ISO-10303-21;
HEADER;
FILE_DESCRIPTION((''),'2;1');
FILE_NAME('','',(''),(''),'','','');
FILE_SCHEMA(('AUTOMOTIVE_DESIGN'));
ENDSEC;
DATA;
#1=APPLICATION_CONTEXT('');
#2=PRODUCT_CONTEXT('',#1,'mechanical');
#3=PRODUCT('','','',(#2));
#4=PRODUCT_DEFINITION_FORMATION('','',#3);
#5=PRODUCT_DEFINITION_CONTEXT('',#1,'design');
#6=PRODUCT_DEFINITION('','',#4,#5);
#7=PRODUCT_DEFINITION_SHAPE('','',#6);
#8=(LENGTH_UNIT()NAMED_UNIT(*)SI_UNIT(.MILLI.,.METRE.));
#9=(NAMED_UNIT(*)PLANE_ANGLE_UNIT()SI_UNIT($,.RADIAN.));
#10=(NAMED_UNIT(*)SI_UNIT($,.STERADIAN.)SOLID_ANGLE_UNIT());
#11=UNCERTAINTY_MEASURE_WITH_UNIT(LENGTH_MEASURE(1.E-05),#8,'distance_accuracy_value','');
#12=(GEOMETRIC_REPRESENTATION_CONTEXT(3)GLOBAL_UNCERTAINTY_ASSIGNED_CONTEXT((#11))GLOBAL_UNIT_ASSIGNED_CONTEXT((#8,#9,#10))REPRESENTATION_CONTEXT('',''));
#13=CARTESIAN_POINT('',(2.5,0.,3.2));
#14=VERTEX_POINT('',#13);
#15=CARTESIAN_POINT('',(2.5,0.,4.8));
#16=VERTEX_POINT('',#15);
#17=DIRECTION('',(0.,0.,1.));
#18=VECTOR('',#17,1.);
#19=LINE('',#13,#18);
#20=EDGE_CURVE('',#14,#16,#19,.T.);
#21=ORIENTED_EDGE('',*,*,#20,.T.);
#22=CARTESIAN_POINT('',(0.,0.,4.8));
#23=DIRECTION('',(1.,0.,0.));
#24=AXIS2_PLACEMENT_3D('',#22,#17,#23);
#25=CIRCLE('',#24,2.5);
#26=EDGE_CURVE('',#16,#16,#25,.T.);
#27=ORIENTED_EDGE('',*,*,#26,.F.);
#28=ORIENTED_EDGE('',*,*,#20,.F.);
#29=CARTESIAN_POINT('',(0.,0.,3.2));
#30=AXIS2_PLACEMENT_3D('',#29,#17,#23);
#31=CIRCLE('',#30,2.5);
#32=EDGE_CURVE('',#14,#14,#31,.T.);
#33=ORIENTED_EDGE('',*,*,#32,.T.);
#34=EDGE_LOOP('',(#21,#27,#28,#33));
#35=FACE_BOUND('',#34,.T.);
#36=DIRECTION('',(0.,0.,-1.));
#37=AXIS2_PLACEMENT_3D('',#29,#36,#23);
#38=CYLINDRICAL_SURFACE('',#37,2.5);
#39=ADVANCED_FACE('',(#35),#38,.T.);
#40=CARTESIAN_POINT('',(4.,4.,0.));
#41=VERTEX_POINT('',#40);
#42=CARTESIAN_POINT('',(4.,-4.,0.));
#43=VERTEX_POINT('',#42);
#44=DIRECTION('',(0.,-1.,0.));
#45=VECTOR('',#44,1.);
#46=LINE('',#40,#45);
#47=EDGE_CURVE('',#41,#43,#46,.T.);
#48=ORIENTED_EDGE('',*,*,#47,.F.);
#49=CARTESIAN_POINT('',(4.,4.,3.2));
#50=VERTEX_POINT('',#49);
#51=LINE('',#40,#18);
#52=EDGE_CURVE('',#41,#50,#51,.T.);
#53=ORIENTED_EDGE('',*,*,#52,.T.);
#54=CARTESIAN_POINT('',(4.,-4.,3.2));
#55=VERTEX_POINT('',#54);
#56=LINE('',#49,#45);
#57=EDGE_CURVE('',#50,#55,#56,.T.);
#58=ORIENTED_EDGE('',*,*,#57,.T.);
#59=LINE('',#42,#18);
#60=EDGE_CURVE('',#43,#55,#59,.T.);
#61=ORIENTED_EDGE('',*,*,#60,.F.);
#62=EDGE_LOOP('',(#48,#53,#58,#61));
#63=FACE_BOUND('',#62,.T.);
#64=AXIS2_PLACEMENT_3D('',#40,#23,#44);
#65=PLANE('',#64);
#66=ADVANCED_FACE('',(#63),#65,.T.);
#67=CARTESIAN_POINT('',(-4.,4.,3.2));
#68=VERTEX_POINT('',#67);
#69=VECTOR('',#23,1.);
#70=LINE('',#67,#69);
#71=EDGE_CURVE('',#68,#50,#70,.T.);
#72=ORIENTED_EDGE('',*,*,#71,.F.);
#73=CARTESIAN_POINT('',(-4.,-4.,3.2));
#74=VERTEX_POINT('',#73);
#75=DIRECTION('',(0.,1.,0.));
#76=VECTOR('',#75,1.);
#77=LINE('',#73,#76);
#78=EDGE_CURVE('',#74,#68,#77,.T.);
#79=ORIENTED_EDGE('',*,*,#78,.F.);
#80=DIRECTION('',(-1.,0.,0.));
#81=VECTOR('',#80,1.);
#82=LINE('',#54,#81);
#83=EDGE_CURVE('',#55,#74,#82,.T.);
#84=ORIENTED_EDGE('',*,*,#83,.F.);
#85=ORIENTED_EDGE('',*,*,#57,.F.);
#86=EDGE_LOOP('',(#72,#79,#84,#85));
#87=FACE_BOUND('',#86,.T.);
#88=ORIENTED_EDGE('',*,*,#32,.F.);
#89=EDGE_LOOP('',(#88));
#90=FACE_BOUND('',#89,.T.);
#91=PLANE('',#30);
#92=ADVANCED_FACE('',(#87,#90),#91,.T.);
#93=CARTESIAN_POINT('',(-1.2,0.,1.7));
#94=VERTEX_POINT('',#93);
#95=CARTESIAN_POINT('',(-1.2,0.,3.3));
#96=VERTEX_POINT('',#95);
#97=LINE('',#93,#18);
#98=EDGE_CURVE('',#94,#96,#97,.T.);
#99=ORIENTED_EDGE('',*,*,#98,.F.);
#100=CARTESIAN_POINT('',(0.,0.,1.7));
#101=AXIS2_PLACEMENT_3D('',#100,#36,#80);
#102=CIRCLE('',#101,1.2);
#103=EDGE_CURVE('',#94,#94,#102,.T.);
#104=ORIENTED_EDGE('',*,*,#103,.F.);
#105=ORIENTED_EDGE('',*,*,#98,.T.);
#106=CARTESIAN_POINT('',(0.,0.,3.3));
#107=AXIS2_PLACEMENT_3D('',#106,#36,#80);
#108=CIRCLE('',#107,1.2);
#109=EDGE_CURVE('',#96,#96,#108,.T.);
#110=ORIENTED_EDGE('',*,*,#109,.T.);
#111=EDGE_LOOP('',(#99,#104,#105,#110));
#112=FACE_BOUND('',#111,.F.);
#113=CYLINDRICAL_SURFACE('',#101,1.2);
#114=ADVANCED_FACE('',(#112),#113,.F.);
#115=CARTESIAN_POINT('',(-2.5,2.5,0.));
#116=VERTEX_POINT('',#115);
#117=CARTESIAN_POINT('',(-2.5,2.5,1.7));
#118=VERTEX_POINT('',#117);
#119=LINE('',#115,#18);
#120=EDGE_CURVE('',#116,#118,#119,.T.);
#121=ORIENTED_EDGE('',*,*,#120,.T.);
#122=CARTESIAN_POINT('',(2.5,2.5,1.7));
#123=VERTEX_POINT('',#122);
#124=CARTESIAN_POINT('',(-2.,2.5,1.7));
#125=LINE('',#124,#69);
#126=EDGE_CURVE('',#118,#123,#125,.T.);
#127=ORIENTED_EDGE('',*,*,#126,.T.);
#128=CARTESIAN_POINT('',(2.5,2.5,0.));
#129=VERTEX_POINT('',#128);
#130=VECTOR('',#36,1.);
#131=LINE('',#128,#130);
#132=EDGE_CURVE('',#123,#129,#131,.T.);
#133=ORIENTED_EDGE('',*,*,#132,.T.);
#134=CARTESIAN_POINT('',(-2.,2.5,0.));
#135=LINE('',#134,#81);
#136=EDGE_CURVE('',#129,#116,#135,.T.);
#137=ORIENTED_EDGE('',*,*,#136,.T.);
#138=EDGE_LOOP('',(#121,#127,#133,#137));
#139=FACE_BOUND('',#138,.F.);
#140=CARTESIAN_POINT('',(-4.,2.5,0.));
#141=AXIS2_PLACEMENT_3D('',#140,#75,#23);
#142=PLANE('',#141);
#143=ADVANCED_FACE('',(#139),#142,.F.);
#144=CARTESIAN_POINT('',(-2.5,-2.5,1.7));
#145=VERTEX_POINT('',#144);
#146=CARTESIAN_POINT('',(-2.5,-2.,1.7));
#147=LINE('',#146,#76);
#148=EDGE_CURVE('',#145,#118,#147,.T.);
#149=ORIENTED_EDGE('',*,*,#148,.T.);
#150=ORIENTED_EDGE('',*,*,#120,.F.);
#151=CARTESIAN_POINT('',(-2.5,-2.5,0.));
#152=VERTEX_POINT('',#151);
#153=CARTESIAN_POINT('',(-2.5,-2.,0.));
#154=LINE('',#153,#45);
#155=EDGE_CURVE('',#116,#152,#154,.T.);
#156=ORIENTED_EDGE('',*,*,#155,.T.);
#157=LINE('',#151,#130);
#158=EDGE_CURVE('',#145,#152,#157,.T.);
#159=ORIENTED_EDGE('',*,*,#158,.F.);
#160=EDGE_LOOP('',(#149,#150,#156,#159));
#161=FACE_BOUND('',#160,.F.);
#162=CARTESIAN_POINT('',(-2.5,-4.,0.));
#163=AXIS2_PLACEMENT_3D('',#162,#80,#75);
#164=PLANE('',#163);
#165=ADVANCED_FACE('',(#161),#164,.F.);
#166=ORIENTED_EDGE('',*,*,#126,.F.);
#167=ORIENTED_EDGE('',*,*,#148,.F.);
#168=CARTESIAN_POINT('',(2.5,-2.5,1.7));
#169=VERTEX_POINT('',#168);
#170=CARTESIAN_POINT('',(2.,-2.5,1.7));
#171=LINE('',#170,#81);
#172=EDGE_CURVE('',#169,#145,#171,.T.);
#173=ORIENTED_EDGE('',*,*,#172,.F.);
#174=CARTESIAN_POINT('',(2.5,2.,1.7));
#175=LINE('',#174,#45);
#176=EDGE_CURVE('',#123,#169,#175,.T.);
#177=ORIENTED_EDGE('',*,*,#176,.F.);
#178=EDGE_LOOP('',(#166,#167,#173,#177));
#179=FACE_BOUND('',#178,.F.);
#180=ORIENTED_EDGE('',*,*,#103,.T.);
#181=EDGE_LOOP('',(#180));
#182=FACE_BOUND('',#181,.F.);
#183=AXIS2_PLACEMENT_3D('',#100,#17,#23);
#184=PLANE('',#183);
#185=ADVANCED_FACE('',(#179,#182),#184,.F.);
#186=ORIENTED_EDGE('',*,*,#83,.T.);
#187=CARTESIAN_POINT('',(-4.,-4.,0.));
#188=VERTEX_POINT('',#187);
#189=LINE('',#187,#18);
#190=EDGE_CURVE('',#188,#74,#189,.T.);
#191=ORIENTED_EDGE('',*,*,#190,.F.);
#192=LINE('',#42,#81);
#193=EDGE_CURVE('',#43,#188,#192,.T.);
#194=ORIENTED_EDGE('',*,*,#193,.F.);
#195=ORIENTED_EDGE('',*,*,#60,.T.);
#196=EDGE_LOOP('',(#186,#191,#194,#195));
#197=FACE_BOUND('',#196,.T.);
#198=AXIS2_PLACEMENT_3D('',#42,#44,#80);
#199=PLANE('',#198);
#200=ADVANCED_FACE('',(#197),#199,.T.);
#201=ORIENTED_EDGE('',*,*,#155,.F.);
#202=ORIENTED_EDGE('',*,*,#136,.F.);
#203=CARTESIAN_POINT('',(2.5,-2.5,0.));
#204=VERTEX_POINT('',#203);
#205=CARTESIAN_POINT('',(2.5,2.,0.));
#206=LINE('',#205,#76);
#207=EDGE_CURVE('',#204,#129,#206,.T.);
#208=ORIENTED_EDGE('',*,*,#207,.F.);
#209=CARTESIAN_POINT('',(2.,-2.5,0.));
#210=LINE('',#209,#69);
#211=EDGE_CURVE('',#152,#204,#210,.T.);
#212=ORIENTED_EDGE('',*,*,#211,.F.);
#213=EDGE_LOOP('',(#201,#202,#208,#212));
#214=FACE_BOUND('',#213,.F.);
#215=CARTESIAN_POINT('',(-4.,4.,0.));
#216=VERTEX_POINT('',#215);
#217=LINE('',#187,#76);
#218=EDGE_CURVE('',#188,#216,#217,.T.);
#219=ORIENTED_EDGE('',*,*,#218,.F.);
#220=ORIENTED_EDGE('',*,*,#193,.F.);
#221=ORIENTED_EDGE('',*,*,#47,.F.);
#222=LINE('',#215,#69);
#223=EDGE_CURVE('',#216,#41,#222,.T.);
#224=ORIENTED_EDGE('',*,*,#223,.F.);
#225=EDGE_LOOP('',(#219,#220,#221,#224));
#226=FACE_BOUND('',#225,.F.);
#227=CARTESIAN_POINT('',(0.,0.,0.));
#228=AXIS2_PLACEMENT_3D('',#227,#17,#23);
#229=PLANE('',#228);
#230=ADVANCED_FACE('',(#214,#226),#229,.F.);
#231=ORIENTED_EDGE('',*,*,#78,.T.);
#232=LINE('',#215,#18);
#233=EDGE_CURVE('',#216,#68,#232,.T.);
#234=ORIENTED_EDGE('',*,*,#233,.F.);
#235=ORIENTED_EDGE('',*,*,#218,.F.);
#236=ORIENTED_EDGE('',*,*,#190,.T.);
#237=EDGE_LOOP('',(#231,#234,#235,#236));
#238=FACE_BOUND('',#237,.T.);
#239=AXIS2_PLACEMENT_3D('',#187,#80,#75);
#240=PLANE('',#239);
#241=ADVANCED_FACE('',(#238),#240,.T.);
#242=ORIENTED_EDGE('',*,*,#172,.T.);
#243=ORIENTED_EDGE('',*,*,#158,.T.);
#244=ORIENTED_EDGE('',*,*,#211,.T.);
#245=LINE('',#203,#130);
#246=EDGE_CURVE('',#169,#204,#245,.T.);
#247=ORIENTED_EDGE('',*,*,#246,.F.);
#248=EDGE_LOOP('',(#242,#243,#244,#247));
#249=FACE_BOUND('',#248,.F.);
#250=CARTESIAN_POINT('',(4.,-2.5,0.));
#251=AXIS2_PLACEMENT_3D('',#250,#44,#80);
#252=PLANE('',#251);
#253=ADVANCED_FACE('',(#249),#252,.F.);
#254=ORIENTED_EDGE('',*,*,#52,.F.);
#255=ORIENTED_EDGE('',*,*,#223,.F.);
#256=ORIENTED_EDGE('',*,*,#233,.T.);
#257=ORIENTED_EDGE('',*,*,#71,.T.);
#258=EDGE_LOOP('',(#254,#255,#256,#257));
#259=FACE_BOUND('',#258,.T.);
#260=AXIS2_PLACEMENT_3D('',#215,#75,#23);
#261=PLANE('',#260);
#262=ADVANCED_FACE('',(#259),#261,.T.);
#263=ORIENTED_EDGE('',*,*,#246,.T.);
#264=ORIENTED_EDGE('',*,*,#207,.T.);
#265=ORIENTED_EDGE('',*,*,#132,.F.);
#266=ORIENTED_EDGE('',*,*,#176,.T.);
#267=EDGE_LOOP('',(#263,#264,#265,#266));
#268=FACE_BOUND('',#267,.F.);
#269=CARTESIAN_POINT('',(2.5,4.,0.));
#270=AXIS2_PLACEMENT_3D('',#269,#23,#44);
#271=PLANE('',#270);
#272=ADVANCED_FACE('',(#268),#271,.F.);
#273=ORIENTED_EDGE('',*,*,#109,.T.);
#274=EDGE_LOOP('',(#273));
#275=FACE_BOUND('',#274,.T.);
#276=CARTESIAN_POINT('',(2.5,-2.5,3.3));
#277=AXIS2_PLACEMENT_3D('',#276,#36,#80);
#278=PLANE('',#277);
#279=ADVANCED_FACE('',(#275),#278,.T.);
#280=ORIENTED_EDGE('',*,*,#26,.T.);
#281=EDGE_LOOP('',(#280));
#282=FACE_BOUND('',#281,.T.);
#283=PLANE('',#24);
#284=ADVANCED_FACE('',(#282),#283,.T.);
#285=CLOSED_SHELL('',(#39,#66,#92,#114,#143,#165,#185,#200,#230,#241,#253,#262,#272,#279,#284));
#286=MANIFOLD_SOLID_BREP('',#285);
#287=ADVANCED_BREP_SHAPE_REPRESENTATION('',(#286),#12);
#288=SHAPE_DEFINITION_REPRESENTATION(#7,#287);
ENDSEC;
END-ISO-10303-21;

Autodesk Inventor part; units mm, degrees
ref_plane "YZ Plane" through (0, 0, 0) normal (1, 0, 0) x (0, 1, 0)
ref_plane "XZ Plane" through (0, 0, 0) normal (0, 1, 0) x (-1, 0, 0)
ref_plane "XY Plane" through (0, 0, 0) normal (0, 0, 1) x (1, 0, 0)
sketch "Sketch1" plane through (0, 0, 0) normal (0, 0, 1) x (1, 0, 0)
  line L0 (-4, 4) -> (4, 4)
  line L1 (4, 4) -> (4, -4)
  line L2 (4, -4) -> (-4, -4)
  line L3 (-4, -4) -> (-4, 4)
  point P0 (0, 0)
  dimension "d0" = 8
  dimension "d1" = 8
  dimension "d2" = 4
  dimension "d3" = 4
extrude "Extrusion1" add sketch "Sketch1" along normal blind 3.2
shell "Shell1" thickness 1.5 removed faces 1 at (-1.3333, 1.3333, 0)
sketch "Sketch2" plane through (0, 0, 3.2) normal (0, 0, 1) x (1, 0, 0)
  circle A0 centre (0, 0) radius 2.5
  line L0 (4, 4) -> (4, -4) projected
  line L1 (4, -4) -> (-4, -4) projected
  dimension "d7" = 5
  dimension "d10" = 4
  dimension "d11" = 4
extrude "Extrusion2" add sketch "Sketch2" along normal blind 1.6
sketch "Sketch3" plane through (2.5, -2.5, 1.7) normal (0, 0, -1) x (-1, 0, 0)
  circle A0 centre (2.5, 2.5) radius 2.5 projected
  circle A1 centre (2.5, 2.5) radius 1.2
  point P0 (2.5, 2.5)
  dimension "d18" = 2.4
extrude "Extrusion3" cut sketch "Sketch3" against normal blind 1.6 contours A1
pattern_of_one "Rectangular Pattern1"
sketch "Sketch4" plane through (2.5, -2.5, 1.7) normal (0, 0, -1) x (-1, 0, 0)
  circle A0 centre (2.5, 2.5) radius 1.2 projected
  line L0 (0, 5) -> (0, 0) projected
  line L1 (0, 0) -> (5, 0) projected
  circle A1 centre (6.5, 6.5) radius 3.15
  circle A2 centre (6.5, 6.5) radius 2.5
  point P0 (2.5, 2.5)
  dimension "d21" = 6.5
  dimension "d22" = 6.5
  dimension "d24" = 2.5
  dimension "d25" = 5
  dimension "d26" = 6.3
extrude "Extrusion4" [suppressed]
pattern_linear "Rectangular Pattern2" [suppressed]
equation "\"d0\" = 8 * WIDTH"
equation "\"d1\" = 8 * LENGTH"
equation "\"d2\" = 0.5 * d0"
equation "\"d3\" = 0.5 * d1"
equation "\"d4\" = HEIGHT"
equation "\"d21\" = 0.5 * d23 + 0.5 * d24"
equation "\"d22\" = d21"
equation "\"WIDTH\" = 1"
equation "\"HEIGHT\" = 3.2"
equation "\"LENGTH\" = 1"
equation "\"d23\" = 10.5"
properties part number "3024" material "Steel"
